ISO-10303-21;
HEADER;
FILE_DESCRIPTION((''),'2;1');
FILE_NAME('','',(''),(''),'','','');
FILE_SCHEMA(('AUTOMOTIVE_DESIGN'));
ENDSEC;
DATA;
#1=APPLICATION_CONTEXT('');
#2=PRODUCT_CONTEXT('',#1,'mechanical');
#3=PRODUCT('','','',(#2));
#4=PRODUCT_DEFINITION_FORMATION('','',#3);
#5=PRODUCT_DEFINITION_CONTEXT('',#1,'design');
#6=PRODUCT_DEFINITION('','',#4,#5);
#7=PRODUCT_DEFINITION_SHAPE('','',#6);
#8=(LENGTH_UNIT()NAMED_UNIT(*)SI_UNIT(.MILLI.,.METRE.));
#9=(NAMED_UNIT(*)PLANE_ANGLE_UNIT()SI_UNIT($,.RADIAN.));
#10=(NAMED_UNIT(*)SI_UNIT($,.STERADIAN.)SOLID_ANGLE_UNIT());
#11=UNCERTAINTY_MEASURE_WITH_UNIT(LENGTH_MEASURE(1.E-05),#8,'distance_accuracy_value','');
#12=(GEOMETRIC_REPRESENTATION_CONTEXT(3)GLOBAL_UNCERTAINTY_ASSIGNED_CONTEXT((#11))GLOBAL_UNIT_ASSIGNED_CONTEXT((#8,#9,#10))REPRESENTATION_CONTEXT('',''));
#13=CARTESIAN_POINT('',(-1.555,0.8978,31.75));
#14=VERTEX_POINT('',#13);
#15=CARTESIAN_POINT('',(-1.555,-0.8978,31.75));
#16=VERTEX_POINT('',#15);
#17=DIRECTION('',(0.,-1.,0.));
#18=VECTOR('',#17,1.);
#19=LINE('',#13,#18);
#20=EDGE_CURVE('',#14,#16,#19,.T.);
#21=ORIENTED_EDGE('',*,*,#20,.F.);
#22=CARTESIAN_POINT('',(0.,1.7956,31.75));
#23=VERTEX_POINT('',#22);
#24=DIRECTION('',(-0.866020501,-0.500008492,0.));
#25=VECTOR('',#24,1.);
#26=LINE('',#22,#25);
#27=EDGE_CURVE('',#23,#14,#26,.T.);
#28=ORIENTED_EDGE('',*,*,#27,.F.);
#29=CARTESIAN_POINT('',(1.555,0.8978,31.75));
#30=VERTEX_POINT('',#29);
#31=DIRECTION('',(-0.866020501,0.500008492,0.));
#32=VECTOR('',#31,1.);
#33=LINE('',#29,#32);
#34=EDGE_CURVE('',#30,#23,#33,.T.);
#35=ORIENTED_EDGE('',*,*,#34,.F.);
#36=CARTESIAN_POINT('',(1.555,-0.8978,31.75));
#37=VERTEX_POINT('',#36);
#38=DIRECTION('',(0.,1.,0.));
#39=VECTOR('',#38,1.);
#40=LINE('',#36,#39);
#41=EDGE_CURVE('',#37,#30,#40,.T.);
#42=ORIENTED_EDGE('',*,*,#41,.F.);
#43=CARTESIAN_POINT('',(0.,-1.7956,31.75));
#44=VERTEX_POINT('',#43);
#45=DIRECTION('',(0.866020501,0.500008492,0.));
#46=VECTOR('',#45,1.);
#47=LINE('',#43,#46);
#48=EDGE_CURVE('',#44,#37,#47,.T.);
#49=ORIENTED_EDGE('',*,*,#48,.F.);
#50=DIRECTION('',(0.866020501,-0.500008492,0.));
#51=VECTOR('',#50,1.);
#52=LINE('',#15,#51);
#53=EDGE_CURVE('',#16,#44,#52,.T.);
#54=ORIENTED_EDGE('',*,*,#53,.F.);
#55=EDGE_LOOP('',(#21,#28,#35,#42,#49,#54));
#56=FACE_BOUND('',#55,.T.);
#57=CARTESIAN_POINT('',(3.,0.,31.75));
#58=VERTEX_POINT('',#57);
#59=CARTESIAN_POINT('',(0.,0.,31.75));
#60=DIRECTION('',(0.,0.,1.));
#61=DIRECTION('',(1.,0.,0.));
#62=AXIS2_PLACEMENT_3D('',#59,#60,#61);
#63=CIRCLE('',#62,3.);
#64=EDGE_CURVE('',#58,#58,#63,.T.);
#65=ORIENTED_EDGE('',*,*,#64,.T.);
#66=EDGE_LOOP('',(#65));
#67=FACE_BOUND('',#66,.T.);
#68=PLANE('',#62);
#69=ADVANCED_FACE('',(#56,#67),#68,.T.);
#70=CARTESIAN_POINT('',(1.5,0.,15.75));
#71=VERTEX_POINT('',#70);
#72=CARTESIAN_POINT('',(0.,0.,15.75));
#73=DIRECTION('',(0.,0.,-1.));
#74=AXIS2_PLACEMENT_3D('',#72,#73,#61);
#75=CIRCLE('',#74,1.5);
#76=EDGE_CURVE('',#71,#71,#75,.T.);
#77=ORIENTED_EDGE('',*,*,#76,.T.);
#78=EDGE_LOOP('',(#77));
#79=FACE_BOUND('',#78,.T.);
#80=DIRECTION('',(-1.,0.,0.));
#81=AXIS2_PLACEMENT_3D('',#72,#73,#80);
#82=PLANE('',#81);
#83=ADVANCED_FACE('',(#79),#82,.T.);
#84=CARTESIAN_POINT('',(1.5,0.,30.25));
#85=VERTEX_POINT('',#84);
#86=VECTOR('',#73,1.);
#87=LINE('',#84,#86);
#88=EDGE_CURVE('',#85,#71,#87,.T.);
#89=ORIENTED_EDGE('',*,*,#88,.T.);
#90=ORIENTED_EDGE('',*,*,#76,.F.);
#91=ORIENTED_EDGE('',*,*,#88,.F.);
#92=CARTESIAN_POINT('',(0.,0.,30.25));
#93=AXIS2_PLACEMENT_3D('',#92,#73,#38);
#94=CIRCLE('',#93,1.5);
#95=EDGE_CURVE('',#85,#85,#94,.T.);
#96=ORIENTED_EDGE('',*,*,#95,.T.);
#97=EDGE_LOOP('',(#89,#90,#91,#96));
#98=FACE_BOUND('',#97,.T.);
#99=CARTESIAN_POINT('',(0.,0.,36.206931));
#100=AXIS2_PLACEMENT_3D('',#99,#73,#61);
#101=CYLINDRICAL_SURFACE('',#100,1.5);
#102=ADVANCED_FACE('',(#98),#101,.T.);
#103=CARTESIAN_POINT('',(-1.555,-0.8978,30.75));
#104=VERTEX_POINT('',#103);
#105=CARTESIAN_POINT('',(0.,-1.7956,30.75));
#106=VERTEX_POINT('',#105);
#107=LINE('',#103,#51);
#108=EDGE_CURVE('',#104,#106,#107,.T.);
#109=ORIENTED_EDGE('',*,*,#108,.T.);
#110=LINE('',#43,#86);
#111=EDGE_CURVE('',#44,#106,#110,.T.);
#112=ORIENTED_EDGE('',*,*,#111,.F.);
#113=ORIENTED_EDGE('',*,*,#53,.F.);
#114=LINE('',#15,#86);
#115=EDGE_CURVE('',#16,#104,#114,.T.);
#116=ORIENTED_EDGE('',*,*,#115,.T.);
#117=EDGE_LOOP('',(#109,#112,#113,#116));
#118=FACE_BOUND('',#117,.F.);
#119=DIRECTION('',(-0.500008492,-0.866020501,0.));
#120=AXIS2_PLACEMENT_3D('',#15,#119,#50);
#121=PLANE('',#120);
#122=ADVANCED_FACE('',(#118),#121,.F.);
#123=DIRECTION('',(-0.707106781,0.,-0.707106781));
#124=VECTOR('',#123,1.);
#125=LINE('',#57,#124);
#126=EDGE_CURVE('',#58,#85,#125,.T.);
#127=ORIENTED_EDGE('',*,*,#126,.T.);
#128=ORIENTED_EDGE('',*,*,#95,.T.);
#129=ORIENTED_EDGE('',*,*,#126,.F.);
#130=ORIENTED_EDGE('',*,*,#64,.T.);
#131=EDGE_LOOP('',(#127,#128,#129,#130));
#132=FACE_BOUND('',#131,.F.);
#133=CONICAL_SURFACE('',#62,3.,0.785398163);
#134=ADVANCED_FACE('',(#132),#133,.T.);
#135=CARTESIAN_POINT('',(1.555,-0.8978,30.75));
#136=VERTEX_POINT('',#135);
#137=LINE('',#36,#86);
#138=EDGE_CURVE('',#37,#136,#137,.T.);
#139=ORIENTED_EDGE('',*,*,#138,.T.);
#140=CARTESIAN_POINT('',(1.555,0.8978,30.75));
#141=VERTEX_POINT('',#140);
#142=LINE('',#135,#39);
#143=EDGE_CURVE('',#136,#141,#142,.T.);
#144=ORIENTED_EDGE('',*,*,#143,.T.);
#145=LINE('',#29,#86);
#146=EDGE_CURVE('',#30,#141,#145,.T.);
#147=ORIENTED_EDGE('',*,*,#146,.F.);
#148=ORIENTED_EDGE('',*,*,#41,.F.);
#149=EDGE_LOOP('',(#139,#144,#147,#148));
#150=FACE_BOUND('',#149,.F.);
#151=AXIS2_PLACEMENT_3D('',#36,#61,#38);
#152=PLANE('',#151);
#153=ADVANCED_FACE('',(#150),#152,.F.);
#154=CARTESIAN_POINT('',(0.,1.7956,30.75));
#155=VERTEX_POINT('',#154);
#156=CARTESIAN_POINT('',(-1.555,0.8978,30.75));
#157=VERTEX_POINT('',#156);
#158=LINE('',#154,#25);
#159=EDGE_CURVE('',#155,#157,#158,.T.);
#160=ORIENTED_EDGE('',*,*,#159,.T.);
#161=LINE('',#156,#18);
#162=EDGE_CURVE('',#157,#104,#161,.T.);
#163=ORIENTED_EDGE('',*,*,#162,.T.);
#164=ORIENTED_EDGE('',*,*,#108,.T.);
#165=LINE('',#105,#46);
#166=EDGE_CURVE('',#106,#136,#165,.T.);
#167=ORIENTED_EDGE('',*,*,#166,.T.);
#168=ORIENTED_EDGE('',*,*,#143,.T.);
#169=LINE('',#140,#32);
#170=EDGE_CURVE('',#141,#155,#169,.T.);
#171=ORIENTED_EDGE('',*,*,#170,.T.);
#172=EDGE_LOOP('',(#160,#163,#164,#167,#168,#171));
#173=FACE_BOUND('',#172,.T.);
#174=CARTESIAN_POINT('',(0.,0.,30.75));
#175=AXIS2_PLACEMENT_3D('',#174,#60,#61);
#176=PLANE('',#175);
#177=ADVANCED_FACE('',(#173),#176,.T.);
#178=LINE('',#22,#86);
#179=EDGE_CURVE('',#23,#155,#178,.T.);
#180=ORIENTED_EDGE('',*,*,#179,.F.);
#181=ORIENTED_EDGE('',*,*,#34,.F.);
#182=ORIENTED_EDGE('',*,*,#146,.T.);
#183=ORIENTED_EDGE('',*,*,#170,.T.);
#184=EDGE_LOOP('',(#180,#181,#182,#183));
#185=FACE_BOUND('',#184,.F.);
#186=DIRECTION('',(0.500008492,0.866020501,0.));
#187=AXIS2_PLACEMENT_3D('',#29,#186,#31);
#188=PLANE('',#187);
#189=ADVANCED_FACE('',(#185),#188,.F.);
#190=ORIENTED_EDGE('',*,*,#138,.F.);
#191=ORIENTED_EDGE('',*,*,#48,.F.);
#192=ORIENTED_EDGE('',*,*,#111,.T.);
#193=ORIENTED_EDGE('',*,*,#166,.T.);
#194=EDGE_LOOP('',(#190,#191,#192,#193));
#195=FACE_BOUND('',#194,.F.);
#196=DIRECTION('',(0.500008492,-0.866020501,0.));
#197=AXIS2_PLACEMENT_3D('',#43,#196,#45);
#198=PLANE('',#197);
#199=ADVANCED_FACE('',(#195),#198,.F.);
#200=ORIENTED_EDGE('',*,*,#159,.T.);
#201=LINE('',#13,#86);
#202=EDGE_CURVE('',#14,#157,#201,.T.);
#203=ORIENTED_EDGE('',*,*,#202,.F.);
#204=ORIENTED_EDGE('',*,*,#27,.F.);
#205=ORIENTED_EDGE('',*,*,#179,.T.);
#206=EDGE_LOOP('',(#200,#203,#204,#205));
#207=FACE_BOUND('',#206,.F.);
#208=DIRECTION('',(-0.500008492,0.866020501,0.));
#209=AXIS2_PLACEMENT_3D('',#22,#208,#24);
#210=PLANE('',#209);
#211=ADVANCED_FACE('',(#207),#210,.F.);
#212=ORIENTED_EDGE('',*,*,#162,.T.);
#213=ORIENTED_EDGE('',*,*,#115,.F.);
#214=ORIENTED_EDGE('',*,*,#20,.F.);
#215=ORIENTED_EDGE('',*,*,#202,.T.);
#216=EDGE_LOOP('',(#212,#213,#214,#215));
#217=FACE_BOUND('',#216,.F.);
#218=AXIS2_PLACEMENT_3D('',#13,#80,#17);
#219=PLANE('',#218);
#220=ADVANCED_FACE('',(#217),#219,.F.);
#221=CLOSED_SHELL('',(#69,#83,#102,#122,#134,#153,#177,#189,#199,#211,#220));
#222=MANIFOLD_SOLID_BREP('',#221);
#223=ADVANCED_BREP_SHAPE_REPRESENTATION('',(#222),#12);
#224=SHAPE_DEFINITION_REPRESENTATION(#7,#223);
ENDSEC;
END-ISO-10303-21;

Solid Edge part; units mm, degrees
sketch "Sketch1" plane through (0, 0, 0) normal (0, 0, 1) x (1, 0, 0)
  circle A0 centre (0, 0) radius 1.5
extrude "Protrusion1" add sketch "Sketch1" along normal blind 30
sketch "Sketch2" plane through (0, 0, 30) normal (0, 0, 1) x (1, 0, 0)
  circle A0 centre (0, 0) radius 3
extrude "ExtrudedProtrusion_2" add sketch "Sketch2" along normal blind 1.75
chamfer "Chamfer_1" distance 1.75 angle 45 1 edges at (-3, 0, 30)
sketch "Sketch3" plane through (0, 0, 31.75) normal (0, 0, 1) x (0, 1, 0)
  line L0 (0.8978, -1.555) -> (1.7956, 0)
  line L1 (1.7956, 0) -> (0.8978, 1.555)
  line L2 (0.8978, 1.555) -> (-0.8978, 1.555)
  line L3 (-0.8978, 1.555) -> (-1.7956, 0)
  line L4 (-1.7956, 0) -> (-0.8978, -1.555)
  line L5 (-0.8978, -1.555) -> (0.8978, -1.555)
extrude "ExtrudedCutout_1" cut sketch "Sketch3" against normal blind 1
sketch "Sketch4" plane through (0, 0, 0) normal (0, 0, -1) x (0, 1, 0)
  circle A0 centre (0, 0) radius 1.9215
extrude "ExtrudedCutout_2" cut sketch "Sketch4" against normal blind 15.75
properties material "Iron, grey cast type 20"
